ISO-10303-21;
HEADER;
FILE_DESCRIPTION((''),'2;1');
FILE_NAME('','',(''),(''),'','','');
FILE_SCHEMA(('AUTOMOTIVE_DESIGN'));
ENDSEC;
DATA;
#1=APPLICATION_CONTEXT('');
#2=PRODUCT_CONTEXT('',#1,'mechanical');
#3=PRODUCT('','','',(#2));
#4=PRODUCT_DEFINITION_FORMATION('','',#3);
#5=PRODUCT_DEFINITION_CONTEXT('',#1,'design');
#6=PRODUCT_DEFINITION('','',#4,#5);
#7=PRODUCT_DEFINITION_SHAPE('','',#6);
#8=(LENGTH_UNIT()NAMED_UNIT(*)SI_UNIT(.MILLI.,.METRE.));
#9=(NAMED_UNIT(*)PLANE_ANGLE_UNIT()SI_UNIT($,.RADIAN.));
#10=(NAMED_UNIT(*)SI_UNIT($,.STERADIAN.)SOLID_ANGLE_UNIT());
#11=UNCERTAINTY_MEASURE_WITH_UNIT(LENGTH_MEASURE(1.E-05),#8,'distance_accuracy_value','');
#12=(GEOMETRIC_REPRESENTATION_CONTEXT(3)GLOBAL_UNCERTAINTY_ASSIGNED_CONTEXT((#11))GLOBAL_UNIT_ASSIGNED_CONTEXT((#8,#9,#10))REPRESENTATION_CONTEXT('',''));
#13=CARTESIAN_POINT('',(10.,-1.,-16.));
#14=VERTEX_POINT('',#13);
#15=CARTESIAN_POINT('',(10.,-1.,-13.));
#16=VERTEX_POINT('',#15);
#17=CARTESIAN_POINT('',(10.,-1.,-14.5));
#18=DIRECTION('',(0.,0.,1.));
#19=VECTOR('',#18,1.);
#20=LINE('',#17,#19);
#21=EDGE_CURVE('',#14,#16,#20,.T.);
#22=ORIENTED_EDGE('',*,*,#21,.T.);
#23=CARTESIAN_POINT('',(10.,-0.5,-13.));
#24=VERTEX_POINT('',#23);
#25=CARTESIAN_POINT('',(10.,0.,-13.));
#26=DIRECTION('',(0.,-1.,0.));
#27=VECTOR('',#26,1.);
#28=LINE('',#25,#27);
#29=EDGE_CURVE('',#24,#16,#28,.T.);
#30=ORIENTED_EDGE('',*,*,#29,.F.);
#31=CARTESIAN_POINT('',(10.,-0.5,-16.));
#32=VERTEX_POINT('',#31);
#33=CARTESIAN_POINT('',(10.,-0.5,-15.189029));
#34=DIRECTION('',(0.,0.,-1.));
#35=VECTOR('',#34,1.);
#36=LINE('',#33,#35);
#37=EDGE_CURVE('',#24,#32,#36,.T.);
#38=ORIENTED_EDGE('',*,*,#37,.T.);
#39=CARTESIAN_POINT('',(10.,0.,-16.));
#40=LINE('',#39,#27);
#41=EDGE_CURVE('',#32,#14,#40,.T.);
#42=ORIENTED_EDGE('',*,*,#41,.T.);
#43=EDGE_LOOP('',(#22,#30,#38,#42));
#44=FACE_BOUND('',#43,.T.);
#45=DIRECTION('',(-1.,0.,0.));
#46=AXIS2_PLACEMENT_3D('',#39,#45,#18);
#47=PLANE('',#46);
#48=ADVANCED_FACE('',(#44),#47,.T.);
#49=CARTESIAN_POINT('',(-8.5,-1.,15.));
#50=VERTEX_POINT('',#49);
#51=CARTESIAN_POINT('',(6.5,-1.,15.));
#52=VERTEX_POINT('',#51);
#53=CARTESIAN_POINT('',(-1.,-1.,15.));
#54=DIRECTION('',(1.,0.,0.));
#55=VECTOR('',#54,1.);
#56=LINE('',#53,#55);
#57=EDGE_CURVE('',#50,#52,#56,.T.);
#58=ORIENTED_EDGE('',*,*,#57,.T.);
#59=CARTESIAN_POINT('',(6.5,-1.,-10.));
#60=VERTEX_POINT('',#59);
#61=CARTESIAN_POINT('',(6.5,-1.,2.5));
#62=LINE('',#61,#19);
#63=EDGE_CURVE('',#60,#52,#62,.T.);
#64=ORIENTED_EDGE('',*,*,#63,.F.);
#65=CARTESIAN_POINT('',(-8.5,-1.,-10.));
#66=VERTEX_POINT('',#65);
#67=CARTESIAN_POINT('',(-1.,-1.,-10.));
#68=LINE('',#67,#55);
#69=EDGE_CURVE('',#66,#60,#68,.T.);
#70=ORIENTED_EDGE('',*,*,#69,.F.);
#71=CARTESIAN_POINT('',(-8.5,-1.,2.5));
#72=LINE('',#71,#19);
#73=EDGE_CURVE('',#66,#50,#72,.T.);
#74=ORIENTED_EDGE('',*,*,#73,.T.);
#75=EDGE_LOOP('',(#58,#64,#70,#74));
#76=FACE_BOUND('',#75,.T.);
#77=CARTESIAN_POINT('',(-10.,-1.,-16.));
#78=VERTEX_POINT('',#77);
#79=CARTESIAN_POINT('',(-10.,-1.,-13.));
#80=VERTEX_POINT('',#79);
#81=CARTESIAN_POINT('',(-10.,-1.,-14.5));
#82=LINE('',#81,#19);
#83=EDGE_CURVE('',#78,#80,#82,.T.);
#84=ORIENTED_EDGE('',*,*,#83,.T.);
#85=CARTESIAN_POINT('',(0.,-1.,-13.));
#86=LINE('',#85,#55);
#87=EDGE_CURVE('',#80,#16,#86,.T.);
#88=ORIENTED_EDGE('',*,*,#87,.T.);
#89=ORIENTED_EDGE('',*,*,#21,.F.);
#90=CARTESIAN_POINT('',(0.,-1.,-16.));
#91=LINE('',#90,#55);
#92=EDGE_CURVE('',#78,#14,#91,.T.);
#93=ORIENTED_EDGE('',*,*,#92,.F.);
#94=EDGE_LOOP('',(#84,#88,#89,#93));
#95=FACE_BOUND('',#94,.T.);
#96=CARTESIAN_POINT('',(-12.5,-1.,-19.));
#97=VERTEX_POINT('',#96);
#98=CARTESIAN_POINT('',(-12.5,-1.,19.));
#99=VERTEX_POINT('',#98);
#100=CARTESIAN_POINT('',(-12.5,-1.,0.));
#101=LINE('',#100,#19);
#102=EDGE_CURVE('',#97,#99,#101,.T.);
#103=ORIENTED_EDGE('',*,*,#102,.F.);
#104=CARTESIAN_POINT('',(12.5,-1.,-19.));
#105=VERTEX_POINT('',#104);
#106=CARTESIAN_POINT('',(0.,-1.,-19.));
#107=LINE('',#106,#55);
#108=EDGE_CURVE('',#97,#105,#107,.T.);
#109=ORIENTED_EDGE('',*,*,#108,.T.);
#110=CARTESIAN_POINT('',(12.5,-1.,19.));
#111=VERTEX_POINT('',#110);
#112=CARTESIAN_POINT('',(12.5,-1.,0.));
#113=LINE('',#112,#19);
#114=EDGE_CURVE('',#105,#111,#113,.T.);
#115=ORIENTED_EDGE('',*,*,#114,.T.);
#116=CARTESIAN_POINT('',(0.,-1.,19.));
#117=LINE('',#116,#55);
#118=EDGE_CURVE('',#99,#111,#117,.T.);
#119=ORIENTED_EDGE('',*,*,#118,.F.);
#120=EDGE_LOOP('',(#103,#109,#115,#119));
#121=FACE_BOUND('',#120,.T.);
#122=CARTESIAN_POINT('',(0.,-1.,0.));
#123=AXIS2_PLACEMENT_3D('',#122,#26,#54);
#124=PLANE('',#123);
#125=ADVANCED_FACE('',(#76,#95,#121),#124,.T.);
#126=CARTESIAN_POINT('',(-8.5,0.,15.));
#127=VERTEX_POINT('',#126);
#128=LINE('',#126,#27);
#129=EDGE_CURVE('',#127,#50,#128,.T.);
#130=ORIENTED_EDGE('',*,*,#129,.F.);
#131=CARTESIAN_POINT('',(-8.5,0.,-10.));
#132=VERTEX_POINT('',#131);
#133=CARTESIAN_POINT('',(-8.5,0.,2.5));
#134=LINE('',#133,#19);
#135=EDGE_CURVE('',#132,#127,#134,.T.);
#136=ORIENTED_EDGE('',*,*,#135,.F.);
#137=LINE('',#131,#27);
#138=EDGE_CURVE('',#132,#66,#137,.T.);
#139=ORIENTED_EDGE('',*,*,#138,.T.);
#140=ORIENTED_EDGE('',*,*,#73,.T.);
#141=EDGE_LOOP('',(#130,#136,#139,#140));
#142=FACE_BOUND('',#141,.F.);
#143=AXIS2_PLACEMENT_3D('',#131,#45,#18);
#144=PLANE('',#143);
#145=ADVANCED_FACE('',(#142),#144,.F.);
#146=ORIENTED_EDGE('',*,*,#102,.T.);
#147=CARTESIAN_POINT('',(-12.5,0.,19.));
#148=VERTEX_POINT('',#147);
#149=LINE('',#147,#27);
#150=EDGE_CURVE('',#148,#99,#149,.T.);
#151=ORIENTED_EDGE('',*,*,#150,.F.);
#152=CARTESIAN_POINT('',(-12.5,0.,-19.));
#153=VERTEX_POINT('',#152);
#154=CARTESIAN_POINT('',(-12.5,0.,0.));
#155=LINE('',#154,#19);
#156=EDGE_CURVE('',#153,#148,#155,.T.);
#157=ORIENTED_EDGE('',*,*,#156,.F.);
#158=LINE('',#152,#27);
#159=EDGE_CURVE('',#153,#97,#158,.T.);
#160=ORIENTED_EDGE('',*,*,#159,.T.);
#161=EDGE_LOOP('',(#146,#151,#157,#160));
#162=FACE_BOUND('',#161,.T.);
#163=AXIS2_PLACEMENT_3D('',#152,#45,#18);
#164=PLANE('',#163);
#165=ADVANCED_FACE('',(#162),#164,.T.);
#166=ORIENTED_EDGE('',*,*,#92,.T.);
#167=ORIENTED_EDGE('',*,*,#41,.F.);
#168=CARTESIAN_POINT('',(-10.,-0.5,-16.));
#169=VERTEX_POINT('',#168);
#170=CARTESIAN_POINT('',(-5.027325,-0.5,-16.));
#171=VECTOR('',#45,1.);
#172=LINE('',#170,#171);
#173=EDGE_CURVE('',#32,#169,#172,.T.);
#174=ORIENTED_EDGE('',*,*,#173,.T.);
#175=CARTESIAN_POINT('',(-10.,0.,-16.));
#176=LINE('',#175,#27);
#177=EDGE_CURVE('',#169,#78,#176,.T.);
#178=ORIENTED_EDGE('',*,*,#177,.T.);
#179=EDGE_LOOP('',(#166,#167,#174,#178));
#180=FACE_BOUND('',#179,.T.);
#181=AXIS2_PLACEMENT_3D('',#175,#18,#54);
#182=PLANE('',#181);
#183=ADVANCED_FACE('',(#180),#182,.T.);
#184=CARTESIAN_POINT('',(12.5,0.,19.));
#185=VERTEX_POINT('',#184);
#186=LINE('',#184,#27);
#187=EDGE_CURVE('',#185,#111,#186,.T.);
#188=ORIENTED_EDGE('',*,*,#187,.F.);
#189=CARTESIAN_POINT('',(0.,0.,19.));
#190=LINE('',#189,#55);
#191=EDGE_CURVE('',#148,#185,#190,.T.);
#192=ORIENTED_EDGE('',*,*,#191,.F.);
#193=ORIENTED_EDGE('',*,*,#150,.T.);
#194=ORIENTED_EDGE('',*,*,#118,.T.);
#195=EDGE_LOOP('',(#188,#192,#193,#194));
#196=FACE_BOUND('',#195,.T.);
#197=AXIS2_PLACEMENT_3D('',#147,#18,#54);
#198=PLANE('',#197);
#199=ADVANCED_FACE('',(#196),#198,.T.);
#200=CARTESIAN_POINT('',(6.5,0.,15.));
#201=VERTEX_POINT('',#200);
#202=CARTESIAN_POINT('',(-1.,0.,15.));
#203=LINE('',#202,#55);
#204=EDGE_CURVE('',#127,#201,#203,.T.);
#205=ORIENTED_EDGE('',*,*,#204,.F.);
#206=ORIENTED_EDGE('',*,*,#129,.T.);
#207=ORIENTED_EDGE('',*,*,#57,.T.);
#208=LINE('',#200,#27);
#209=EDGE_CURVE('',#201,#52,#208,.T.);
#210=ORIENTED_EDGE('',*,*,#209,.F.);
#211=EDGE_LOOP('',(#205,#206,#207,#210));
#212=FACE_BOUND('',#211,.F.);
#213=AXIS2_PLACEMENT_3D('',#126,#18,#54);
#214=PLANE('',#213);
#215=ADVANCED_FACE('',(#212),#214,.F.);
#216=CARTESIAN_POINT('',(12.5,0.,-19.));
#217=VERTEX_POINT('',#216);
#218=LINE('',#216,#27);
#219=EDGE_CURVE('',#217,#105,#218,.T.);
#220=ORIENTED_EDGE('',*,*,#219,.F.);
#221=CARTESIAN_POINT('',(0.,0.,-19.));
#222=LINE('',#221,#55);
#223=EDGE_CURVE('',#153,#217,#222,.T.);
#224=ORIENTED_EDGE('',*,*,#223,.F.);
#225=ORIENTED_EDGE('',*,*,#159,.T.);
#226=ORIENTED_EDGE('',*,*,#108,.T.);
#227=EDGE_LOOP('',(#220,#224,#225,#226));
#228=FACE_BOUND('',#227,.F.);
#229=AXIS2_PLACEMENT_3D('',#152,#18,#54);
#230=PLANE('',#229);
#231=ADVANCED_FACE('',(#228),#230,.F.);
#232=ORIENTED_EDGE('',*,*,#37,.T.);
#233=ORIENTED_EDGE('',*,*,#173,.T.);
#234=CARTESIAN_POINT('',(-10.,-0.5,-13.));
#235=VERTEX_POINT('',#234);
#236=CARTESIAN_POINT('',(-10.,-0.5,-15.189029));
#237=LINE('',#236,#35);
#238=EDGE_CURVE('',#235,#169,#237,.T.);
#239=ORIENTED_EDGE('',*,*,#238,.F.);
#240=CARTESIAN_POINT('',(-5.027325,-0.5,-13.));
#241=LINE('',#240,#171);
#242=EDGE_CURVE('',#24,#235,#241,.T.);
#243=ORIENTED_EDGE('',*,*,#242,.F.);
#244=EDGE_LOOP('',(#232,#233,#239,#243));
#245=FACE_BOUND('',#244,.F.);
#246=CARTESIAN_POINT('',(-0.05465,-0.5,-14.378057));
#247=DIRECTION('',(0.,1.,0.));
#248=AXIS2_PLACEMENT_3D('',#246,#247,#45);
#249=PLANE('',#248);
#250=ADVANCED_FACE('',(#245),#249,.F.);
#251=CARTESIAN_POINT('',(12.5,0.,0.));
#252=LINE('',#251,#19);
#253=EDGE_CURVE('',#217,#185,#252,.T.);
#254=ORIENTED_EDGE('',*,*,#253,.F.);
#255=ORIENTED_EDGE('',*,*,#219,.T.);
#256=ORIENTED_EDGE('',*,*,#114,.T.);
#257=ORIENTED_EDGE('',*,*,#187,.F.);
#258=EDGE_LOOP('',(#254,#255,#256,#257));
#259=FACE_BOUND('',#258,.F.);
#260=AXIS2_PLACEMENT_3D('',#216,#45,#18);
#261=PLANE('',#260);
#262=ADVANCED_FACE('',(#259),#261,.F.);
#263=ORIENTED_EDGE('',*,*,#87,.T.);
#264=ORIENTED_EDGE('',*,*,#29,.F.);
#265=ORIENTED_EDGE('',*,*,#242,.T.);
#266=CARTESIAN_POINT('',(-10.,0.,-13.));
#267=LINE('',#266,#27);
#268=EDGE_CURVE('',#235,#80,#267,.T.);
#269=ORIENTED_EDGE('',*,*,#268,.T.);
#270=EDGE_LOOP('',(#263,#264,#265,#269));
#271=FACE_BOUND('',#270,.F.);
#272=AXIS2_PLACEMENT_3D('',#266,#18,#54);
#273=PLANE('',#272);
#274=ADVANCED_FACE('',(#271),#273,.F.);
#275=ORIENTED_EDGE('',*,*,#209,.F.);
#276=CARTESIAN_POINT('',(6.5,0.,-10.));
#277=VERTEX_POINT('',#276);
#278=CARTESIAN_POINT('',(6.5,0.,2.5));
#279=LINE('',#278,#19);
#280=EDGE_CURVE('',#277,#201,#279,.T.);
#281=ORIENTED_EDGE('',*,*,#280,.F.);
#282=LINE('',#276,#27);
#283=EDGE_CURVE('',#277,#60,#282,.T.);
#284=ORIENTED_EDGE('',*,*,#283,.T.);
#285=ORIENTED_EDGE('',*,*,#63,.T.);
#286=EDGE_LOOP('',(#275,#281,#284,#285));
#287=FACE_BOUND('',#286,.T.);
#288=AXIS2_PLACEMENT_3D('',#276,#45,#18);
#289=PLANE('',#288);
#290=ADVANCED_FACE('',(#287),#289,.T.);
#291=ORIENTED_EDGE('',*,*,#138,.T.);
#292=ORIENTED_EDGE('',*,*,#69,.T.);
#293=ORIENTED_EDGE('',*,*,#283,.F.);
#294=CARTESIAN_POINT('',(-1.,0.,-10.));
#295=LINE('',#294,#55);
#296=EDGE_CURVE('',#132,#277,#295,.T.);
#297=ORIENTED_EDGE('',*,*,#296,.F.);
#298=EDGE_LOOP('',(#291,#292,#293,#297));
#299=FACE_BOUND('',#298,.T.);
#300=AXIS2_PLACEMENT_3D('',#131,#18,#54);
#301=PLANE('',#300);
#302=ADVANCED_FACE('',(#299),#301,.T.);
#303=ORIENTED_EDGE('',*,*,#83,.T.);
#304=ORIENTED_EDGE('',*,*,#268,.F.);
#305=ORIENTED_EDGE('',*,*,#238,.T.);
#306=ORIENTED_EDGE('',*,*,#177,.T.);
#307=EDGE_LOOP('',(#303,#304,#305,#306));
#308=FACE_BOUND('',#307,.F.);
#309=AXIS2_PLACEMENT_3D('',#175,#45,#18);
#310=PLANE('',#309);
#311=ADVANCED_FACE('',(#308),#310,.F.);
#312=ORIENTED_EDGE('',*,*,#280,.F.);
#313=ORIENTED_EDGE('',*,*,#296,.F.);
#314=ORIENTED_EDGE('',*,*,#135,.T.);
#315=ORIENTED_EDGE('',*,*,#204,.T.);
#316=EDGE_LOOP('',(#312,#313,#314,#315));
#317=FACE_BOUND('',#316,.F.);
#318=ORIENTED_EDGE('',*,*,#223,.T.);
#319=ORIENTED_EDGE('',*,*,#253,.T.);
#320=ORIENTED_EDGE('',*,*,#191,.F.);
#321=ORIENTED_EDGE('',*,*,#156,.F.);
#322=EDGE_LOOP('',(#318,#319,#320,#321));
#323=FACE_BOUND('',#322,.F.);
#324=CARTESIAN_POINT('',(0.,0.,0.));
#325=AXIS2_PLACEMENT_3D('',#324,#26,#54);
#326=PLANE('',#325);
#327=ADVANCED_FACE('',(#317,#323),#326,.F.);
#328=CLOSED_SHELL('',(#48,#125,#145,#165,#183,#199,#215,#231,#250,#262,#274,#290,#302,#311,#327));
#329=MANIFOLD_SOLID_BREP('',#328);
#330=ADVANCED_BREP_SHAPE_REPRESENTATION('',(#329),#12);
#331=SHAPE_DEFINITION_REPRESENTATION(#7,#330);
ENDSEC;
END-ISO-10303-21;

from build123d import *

# Parameters (mm, degrees)
F0_W     = 25
F0_H     = 38
F0_W_2   = 20
F0_H_2   = 3
F0_W_3   = 15
F0_H_3   = 25
F1_DEPTH = 1
F2_W     = 22.4918248132
F2_H     = 4.8074135557
F2_W_2   = 20
F2_H_2   = 3
F3_DEPTH = 0.5


with BuildPart() as f1:
    # F0 (on Front) → F1 (new body)
    with BuildSketch(Plane.XZ):
        Rectangle(F0_W, F0_H)
        with Locations((0, -14.5)):
            Rectangle(F0_W_2, F0_H_2, mode=Mode.SUBTRACT)
        with Locations((-1, 2.5)):
            Rectangle(F0_W_3, F0_H_3, mode=Mode.SUBTRACT)
    extrude(amount=F1_DEPTH)

    # F2 (on face) → F3 (join)
    with BuildSketch(Plane(origin=(0, 0, 0), x_dir=(-1, 0, 0), z_dir=(0, 1, 0))):
        with Locations((0.0546504743, -14.3780573271)):
            Rectangle(F2_W, F2_H)
        with Locations((0, -14.5)):
            Rectangle(F2_W_2, F2_H_2, mode=Mode.SUBTRACT)
        with Locations((0, -14.5)):
            Rectangle(F2_W_2, F2_H_2)
    extrude(amount=-F3_DEPTH)


solid = f1.part
